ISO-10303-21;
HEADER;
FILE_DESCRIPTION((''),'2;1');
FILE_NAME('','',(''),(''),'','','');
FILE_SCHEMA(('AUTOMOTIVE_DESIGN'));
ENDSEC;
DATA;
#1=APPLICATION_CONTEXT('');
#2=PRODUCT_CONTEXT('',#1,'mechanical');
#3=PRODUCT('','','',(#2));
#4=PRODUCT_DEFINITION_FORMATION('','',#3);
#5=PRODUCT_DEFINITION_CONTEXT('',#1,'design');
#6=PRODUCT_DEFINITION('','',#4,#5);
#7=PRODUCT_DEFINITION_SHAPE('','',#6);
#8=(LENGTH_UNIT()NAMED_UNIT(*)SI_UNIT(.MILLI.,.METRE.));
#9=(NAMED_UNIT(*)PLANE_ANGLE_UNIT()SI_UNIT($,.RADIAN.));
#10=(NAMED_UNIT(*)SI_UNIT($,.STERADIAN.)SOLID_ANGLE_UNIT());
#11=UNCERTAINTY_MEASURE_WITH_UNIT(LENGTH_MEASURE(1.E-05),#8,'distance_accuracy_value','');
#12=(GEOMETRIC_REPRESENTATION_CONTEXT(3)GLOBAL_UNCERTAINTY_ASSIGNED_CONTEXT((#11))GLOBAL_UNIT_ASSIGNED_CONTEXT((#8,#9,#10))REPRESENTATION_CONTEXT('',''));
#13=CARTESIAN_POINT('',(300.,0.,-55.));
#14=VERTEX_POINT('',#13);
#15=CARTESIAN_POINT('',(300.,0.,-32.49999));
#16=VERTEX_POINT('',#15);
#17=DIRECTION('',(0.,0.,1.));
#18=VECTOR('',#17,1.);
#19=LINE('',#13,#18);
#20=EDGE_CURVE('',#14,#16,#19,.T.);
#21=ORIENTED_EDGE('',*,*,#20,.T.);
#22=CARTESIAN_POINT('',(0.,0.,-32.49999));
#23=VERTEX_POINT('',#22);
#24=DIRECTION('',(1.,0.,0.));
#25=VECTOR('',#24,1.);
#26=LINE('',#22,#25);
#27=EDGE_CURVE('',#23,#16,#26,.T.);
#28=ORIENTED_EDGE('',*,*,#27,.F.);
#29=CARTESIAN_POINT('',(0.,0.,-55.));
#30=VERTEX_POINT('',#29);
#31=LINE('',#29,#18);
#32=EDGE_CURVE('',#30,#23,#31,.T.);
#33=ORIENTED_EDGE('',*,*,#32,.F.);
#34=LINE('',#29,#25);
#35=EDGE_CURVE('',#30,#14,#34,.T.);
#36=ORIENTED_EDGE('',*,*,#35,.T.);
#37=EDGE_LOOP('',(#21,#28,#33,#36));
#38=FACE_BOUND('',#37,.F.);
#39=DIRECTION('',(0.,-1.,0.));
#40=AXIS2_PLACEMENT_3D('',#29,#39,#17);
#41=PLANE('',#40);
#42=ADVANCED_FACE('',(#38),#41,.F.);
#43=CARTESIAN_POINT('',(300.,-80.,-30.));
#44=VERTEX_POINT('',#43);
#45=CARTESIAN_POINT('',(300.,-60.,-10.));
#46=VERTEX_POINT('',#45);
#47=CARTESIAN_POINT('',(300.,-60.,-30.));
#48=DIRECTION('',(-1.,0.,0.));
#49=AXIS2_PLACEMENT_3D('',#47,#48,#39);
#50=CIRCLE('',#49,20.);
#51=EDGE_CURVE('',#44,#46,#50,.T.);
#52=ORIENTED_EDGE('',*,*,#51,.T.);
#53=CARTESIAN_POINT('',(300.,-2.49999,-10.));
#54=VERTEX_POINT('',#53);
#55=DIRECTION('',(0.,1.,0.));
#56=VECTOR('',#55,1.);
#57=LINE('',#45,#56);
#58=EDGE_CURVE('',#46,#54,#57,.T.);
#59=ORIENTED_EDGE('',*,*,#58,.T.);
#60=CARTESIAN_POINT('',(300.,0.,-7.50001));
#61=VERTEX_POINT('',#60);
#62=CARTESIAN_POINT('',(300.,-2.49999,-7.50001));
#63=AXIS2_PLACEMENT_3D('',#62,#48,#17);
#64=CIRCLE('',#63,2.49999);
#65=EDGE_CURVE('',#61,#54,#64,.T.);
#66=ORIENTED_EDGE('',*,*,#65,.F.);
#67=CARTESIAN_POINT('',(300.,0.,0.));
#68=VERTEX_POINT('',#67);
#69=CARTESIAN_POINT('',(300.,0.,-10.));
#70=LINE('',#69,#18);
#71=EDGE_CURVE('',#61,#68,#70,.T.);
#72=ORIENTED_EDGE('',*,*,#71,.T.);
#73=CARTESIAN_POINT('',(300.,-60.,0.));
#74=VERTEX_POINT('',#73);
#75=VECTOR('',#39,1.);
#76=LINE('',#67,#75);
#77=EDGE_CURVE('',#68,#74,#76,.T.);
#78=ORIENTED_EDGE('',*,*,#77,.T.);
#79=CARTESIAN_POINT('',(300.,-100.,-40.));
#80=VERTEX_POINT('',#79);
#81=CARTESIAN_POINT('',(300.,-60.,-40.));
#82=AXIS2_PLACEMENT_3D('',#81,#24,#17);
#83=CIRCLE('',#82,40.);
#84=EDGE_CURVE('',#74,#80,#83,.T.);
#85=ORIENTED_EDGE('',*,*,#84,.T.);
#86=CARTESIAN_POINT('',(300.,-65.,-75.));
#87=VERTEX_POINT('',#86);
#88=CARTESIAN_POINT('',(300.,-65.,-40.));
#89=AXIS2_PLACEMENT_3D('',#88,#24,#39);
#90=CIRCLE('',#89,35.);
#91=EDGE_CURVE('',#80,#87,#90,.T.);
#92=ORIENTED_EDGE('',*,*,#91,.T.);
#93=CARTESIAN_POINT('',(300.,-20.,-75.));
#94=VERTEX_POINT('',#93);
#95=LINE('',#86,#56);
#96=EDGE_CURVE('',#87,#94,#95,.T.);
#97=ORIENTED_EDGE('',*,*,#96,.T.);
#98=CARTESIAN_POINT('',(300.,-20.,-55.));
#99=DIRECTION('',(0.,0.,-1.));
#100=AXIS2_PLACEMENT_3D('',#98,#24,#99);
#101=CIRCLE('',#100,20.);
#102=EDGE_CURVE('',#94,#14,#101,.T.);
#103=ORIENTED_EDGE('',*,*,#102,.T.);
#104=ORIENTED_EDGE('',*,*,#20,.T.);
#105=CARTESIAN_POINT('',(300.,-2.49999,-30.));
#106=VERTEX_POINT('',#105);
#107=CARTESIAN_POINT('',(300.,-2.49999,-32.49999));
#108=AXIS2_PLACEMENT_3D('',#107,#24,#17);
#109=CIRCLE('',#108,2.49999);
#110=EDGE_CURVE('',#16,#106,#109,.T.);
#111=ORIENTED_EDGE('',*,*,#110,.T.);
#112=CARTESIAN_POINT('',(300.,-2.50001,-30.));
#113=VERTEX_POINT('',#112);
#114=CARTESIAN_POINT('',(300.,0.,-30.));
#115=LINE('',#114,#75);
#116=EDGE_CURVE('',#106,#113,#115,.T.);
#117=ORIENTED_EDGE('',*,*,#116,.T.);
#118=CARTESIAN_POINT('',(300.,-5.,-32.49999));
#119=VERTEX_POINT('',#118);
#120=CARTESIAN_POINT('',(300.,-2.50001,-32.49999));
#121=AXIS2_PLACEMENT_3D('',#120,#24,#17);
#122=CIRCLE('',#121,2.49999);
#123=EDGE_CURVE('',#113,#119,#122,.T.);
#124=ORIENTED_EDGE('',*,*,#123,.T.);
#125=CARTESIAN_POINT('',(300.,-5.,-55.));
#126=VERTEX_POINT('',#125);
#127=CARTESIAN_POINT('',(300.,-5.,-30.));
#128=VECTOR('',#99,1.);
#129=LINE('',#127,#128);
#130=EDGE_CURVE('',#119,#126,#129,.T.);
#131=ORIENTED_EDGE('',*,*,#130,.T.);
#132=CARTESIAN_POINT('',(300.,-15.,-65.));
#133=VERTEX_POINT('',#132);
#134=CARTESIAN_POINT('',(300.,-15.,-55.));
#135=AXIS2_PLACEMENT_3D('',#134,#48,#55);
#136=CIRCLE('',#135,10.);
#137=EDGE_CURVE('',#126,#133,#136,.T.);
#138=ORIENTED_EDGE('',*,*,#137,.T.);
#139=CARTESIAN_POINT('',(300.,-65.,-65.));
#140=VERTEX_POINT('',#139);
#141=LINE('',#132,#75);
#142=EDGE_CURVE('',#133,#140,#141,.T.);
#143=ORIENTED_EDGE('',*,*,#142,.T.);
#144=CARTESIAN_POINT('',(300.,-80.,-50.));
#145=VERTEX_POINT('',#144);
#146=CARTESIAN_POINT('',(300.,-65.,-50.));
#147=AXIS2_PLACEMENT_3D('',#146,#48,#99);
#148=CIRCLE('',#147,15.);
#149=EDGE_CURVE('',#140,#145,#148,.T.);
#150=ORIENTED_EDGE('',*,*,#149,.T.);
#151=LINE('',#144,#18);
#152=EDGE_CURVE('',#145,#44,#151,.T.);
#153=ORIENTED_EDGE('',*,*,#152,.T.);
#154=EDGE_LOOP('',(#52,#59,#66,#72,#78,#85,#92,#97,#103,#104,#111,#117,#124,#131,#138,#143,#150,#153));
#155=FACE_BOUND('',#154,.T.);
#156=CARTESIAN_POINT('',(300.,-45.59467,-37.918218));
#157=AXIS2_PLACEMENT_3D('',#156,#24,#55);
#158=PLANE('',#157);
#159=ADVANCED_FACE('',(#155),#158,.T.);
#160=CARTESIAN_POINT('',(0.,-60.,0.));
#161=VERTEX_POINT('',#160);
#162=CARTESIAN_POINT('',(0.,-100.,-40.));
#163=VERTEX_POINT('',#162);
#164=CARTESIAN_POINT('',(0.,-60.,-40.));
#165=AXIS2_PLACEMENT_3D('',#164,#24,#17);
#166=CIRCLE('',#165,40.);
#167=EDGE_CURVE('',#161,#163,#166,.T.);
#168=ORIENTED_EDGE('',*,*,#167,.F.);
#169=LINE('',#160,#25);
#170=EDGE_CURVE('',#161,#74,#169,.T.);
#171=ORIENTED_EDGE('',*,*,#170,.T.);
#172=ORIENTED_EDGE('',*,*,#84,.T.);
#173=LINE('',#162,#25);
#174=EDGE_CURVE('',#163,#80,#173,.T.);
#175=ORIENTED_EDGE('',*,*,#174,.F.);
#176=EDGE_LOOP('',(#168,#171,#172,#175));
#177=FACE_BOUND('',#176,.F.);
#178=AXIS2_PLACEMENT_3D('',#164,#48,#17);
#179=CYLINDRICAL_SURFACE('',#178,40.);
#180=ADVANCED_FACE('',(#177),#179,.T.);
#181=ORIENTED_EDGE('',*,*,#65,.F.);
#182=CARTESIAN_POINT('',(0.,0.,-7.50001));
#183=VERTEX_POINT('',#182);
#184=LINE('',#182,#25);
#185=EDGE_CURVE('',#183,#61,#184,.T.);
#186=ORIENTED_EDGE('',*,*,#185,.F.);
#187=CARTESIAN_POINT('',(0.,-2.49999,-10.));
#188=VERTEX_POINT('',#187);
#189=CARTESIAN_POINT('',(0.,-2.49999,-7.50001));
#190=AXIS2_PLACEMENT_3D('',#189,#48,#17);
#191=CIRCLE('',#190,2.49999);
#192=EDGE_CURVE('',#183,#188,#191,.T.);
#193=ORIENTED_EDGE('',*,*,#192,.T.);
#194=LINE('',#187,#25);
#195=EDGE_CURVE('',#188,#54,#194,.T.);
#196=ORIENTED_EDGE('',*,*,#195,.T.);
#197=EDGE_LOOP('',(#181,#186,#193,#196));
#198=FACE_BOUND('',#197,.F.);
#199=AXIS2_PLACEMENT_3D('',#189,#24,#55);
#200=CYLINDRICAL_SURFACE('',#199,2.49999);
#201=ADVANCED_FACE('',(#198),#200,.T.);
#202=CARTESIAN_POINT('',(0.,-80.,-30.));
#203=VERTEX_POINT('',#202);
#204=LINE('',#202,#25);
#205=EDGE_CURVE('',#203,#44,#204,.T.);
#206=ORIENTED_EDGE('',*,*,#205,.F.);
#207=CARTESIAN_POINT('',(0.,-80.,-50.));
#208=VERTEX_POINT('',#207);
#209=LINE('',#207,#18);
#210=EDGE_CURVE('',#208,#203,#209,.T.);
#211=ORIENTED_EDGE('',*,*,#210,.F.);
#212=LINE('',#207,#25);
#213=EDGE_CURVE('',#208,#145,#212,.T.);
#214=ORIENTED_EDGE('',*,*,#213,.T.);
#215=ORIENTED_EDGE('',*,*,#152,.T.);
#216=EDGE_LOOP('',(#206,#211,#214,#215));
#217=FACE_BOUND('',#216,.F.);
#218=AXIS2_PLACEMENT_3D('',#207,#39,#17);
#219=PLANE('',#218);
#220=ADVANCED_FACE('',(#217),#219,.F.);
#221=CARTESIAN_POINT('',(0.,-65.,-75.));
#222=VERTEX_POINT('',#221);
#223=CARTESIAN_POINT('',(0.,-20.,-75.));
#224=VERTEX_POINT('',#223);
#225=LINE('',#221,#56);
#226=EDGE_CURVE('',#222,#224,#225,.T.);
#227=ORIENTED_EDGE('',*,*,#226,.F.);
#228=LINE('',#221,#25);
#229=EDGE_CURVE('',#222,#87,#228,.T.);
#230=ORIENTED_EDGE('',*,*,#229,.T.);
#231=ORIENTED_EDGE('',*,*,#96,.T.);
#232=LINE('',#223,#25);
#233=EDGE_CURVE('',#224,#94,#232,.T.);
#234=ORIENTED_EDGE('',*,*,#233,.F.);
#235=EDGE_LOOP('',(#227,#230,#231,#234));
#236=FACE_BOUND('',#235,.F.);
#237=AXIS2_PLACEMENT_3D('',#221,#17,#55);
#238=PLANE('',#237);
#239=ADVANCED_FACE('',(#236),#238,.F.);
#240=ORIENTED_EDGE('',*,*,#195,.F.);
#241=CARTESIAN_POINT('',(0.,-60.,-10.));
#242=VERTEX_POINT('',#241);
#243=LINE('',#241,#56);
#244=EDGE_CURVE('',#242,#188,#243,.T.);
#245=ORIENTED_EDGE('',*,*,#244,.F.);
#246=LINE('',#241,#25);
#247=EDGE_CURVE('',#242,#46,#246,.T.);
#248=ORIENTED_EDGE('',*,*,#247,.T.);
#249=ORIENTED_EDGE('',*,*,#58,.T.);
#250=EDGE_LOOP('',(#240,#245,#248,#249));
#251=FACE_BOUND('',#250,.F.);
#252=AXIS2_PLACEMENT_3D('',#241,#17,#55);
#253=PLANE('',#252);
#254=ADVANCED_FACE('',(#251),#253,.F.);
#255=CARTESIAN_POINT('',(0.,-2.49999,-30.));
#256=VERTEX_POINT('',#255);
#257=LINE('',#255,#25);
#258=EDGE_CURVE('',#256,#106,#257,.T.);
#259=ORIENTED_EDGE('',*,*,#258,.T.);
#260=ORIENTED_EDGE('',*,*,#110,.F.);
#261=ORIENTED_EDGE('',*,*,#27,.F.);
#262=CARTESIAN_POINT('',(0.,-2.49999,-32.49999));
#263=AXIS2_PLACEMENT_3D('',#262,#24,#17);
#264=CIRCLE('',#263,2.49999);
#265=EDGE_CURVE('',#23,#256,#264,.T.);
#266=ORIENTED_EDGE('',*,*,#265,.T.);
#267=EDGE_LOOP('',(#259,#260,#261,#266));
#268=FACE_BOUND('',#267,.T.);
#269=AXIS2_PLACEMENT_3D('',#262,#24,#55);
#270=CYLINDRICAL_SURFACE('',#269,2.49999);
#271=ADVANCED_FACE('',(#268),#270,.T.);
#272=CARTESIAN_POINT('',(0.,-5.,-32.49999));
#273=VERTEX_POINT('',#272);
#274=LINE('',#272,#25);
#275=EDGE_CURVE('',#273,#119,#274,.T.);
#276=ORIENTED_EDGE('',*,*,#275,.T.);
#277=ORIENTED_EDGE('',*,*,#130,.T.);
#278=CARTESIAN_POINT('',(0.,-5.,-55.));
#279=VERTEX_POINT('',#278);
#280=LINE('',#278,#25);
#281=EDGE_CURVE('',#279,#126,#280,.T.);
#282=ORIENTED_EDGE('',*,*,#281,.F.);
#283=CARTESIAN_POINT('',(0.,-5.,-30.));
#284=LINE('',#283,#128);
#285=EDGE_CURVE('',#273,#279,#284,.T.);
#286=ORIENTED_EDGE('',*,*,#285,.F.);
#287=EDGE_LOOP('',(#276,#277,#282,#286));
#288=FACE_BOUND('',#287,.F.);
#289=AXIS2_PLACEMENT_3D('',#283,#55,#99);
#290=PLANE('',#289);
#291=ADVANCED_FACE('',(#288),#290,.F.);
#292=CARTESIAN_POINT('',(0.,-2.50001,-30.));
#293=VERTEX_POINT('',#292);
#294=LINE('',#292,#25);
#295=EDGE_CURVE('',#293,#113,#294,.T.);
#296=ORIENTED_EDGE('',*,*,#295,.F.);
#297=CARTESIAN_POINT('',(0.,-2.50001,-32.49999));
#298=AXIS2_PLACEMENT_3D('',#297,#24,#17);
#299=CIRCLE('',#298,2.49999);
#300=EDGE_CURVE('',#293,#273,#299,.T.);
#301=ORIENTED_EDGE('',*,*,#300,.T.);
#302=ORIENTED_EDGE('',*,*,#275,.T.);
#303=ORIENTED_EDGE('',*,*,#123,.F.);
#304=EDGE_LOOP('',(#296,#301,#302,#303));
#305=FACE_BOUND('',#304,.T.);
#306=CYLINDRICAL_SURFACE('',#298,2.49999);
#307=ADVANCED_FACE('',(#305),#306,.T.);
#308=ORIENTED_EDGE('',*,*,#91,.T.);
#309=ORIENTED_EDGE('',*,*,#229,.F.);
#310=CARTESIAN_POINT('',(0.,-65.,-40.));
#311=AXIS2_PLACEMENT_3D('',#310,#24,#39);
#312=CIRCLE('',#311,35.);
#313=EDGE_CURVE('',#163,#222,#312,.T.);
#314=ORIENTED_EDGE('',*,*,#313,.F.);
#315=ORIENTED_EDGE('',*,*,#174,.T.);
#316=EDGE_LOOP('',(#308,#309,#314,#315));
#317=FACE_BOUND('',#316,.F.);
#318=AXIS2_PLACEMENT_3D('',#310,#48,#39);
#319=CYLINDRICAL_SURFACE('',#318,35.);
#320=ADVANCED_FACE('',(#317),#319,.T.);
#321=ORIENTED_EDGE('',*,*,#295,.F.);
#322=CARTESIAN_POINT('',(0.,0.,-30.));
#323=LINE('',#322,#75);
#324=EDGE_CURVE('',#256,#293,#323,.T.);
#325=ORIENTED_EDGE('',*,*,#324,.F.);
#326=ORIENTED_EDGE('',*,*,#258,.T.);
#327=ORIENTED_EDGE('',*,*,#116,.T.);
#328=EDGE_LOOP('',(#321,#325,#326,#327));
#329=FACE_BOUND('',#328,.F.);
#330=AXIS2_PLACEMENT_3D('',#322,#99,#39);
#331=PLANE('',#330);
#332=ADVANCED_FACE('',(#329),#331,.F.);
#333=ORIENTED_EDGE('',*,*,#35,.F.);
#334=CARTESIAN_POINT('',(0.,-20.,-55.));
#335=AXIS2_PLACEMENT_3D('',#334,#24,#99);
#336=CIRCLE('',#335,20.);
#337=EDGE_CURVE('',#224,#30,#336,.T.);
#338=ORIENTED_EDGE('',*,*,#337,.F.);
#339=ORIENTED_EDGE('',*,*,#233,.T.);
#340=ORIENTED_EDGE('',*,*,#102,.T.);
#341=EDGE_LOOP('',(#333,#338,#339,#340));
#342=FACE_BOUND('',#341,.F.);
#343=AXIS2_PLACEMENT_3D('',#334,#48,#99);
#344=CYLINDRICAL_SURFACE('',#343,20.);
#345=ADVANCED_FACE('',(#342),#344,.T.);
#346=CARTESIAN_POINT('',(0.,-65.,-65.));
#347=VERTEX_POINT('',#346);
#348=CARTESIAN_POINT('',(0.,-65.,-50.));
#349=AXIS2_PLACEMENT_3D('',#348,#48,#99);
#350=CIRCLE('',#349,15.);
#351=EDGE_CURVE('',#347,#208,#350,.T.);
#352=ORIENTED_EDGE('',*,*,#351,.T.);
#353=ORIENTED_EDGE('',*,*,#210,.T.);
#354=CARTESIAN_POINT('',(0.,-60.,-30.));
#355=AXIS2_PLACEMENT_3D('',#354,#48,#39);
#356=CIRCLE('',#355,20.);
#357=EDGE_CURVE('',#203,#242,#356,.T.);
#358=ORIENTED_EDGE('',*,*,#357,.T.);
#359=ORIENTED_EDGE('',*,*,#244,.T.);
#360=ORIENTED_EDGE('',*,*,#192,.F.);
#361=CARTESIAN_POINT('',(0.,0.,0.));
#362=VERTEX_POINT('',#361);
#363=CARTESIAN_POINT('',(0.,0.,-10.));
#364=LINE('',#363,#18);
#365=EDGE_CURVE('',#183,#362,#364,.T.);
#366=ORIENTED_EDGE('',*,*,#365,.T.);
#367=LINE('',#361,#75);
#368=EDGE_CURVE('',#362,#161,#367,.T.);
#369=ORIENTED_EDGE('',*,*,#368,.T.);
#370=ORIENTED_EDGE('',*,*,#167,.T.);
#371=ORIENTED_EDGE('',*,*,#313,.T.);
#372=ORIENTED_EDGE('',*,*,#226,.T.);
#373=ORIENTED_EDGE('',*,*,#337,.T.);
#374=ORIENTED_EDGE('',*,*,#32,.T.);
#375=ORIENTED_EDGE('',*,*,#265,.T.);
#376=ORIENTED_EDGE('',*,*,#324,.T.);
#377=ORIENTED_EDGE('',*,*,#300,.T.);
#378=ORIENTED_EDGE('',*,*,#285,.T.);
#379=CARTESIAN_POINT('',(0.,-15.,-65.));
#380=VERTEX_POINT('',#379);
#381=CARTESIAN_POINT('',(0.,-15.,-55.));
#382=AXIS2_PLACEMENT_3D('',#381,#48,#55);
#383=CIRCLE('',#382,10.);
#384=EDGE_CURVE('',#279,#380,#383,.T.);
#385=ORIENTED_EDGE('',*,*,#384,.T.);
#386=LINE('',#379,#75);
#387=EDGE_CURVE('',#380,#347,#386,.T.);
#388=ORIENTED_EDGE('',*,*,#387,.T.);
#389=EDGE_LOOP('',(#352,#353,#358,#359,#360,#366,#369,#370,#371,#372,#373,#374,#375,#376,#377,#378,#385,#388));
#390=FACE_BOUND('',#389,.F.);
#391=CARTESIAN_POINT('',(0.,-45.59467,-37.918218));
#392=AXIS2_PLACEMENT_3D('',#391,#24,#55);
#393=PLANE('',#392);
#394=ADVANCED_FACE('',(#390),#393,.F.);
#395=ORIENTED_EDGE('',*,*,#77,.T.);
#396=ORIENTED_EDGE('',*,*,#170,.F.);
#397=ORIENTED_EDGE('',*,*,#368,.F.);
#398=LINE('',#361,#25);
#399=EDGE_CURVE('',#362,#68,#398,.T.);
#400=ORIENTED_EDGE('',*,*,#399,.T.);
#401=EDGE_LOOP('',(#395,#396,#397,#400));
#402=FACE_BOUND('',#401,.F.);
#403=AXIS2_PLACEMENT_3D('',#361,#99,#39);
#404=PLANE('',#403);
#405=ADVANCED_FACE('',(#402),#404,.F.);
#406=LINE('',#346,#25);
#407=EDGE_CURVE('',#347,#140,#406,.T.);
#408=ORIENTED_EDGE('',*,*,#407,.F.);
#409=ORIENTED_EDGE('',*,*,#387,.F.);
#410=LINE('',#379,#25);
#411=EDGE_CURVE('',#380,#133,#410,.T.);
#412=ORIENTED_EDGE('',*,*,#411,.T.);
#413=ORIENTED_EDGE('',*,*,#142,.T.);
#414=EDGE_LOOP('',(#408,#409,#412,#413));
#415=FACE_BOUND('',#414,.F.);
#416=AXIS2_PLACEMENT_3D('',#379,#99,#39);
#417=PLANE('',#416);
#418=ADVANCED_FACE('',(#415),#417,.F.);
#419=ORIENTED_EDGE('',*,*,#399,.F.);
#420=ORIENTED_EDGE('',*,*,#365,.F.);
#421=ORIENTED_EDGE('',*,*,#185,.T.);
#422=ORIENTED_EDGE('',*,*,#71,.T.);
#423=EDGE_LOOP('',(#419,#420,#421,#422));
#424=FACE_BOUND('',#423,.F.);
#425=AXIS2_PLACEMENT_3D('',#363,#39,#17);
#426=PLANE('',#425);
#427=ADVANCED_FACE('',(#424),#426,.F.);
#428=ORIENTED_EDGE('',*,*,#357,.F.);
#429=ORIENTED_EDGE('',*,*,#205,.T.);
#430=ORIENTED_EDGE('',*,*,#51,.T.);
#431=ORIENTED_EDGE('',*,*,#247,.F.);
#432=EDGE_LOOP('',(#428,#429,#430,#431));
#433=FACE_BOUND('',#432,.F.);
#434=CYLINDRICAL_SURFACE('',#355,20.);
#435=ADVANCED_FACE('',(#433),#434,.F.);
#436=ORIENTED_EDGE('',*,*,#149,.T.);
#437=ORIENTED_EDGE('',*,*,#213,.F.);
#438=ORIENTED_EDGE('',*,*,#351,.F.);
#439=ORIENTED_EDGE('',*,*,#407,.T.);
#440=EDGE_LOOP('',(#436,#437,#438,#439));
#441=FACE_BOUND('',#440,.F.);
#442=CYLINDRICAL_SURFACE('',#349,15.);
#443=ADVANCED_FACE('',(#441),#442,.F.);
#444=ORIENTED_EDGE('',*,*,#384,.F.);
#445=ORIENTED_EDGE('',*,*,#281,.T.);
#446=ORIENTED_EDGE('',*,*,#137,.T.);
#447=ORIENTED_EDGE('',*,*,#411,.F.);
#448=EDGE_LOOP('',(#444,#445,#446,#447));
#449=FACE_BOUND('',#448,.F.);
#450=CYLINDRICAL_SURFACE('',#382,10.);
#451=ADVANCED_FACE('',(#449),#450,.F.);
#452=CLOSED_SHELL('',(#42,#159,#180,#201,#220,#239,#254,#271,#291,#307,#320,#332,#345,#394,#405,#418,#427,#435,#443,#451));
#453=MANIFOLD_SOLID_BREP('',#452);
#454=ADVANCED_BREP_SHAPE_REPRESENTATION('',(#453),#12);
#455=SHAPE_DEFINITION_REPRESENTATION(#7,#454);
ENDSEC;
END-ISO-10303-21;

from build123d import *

# Parameters (mm, degrees)
F1_DEPTH = 300
F2_R     = 2.49999


# Not quite as in the source:
# - a fillet or chamfer is up to 0.001 mm smaller than in the source, because OpenCascade refuses the exact size


with BuildPart() as f1:
    # F0 (on Right) → F1 (new body)
    with BuildSketch(Plane.YZ):
        with BuildLine():
            Line((0, -10), (0, 0))
            Line((0, 0), (-60, 0))
            ThreePointArc((-60, 0), (-88.2842712475, -11.7157287525), (-100, -40))
            ThreePointArc((-100, -40), (-89.7487373415, -64.7487373415), (-65, -75))
            Line((-65, -75), (-20, -75))
            ThreePointArc((-20, -75), (-5.8578643763, -69.1421356237), (0, -55))
            Line((0, -55), (0, -30))
            Line((0, -30), (-5, -30))
            Line((-5, -30), (-5, -55))
            ThreePointArc((-5, -55), (-7.9289321881, -62.0710678119), (-15, -65))
            Line((-15, -65), (-65, -65))
            ThreePointArc((-65, -65), (-75.6066017178, -60.6066017178), (-80, -50))
            Line((-80, -50), (-80, -30))
            ThreePointArc((-80, -30), (-74.1421356237, -15.8578643763), (-60, -10))
            Line((-60, -10), (0, -10))
        make_face()
    extrude(amount=F1_DEPTH)

    # F2 (radius 2.5 in the source; OpenCascade refuses exactly that, so slightly less here)
    f2_edges = [f1.edges().sort_by_distance(p)[0] for p in [
        (150, 0, -10),
        (150, 0, -30),
        (150, -5, -30),
    ]]
    fillet(f2_edges, radius=F2_R)


solid = f1.part
